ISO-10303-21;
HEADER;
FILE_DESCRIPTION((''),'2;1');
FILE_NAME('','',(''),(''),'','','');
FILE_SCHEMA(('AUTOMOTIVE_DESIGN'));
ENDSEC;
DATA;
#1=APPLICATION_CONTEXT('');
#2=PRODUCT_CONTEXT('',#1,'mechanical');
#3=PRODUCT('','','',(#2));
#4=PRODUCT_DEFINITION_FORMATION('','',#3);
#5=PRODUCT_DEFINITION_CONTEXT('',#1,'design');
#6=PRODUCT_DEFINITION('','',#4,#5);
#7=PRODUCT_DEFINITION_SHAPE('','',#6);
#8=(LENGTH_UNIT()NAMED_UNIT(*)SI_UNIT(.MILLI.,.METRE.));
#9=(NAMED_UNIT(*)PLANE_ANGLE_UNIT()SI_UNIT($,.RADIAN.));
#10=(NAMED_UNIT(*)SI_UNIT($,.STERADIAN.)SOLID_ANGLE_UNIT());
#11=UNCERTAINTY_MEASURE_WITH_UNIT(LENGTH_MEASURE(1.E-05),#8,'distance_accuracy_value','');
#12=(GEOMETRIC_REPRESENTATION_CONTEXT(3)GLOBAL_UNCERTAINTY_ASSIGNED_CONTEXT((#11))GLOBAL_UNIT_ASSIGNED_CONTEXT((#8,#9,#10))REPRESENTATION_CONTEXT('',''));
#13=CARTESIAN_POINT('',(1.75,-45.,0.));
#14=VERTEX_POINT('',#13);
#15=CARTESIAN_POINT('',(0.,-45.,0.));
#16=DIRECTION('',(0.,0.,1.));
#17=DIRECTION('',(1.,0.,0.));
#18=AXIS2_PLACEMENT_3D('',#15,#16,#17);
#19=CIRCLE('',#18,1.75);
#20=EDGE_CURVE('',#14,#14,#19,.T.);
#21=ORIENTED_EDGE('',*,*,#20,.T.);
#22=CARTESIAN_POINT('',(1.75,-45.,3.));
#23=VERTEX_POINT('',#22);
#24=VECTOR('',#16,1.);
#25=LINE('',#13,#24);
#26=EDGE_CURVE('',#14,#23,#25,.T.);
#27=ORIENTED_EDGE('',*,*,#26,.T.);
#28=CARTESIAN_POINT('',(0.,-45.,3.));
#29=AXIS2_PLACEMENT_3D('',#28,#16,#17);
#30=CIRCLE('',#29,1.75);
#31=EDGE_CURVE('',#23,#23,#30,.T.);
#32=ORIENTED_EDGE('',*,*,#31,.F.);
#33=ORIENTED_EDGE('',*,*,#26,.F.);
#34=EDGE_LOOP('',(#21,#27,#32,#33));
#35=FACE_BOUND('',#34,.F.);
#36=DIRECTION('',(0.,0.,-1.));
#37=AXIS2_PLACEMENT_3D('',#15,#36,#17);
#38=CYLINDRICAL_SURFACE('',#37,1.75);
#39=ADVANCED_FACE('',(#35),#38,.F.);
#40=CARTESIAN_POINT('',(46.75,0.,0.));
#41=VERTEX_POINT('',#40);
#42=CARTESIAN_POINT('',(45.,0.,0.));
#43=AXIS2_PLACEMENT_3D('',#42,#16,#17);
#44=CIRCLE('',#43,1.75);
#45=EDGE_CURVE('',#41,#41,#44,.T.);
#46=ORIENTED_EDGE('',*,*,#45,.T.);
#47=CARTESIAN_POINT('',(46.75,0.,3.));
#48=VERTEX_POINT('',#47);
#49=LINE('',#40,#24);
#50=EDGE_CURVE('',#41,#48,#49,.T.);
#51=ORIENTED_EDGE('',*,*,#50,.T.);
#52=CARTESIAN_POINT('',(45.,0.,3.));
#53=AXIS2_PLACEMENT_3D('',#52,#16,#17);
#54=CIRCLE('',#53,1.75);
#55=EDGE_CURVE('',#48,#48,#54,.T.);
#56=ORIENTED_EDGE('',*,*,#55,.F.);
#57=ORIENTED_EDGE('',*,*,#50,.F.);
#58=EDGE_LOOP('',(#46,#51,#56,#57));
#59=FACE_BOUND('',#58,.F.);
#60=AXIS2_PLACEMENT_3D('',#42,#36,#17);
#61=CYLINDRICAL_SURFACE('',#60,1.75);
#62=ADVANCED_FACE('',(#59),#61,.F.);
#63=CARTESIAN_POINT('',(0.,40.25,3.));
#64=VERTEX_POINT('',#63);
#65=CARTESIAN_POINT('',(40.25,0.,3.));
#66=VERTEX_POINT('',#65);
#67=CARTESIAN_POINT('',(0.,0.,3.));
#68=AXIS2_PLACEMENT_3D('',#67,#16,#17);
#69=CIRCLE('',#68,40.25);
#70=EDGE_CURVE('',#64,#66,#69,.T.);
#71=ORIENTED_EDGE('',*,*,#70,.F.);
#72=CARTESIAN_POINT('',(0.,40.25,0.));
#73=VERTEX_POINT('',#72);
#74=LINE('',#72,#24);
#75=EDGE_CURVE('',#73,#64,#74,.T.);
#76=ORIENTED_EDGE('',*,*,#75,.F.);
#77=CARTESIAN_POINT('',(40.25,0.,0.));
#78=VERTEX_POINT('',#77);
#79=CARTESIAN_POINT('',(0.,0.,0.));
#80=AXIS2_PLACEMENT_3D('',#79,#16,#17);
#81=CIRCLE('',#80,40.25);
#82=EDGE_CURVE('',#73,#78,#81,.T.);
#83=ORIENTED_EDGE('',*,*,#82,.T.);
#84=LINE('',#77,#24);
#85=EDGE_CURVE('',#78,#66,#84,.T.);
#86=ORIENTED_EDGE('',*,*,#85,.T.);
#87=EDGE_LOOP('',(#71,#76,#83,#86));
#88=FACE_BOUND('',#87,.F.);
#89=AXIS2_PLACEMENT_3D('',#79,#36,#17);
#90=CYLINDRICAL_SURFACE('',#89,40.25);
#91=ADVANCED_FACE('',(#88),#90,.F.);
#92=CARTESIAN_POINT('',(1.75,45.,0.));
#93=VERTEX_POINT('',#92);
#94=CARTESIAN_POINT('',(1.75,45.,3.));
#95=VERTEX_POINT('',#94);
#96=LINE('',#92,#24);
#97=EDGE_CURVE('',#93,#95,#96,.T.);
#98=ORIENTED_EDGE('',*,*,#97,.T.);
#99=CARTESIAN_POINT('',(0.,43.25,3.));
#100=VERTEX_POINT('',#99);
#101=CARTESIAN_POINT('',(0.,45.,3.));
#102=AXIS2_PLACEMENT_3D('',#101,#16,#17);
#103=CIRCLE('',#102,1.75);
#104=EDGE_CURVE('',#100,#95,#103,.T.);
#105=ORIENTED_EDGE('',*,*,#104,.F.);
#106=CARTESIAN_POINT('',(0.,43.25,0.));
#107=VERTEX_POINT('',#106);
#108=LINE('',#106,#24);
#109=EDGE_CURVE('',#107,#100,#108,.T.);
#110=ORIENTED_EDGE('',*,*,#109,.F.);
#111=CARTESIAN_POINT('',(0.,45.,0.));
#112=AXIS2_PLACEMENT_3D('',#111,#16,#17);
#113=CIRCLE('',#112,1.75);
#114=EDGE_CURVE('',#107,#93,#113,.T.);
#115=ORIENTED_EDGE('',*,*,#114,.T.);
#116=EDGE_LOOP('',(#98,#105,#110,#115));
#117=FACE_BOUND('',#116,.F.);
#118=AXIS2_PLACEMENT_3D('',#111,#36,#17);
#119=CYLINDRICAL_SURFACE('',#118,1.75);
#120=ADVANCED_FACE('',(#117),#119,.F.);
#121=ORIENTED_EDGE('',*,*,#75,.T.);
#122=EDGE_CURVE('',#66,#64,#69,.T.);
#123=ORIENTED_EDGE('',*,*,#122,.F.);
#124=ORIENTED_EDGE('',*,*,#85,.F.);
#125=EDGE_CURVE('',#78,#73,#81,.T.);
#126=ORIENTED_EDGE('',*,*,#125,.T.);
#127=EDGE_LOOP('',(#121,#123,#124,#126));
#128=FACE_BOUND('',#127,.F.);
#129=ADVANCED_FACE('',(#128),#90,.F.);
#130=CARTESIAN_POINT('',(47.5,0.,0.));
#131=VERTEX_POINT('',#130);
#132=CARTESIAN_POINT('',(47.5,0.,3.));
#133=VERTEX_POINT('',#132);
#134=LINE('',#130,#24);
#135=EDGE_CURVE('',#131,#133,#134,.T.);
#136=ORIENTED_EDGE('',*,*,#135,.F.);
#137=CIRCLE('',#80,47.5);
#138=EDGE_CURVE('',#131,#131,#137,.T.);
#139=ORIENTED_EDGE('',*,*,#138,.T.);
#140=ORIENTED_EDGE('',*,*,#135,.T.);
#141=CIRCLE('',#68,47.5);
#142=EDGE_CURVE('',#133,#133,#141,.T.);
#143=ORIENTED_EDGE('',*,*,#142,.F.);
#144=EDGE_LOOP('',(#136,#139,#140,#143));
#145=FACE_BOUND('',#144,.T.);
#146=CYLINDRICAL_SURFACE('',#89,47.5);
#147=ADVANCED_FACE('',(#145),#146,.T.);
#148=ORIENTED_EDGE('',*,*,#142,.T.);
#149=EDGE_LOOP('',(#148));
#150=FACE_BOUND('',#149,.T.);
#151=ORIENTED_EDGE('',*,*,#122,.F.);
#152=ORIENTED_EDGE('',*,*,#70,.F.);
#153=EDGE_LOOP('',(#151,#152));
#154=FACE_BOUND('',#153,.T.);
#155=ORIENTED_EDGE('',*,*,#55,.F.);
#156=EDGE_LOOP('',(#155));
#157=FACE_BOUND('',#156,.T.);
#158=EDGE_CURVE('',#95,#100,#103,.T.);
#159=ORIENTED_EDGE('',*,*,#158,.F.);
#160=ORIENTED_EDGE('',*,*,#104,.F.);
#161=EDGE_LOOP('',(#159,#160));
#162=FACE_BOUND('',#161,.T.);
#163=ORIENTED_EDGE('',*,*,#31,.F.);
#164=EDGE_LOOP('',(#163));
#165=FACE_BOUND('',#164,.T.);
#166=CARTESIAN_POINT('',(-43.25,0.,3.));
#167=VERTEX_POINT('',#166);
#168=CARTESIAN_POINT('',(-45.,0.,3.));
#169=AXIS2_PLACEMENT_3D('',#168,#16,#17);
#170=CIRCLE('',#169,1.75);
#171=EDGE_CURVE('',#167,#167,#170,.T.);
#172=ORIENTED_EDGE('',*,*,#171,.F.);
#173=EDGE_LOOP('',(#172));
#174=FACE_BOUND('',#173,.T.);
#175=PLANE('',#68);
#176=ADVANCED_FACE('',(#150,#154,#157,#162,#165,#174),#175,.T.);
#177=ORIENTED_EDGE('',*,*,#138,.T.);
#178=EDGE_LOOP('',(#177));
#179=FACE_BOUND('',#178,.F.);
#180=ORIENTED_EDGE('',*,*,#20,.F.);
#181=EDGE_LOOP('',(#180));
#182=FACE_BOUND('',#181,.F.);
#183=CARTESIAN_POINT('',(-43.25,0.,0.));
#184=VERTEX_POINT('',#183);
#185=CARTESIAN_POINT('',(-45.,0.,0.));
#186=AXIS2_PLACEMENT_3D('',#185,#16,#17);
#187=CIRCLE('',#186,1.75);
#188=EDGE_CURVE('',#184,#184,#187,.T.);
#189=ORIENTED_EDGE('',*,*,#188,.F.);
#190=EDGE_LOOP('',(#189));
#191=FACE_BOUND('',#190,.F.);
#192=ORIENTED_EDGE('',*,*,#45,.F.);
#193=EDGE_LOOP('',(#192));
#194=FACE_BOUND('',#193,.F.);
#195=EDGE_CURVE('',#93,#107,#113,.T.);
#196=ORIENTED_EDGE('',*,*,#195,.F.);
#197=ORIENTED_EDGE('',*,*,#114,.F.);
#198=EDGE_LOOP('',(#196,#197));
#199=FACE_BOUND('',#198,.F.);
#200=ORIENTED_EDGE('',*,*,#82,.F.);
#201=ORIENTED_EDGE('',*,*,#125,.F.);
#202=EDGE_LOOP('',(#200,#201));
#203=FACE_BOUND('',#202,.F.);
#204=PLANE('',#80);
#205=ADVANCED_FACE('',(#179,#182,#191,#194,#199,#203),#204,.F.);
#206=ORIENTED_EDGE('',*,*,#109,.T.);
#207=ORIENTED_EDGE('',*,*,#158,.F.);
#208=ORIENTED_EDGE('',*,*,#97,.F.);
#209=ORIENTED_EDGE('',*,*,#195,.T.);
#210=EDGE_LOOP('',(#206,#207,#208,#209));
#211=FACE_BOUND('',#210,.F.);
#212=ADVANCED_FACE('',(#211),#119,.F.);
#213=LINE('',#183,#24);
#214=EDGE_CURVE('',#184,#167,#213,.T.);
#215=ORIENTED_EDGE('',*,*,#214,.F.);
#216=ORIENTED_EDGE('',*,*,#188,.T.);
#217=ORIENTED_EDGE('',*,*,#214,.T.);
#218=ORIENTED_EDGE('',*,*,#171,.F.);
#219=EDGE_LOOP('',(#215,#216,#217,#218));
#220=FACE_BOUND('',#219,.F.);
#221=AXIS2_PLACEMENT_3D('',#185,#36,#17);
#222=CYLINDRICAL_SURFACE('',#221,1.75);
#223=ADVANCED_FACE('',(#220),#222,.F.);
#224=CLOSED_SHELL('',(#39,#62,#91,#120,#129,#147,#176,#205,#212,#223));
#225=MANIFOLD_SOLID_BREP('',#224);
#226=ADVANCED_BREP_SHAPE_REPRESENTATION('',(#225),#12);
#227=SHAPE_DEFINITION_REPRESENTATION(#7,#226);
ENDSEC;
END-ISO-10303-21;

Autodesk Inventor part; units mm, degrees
ref_plane "YZ Plane" through (0, 0, 0) normal (1, 0, 0) x (0, 1, 0)
ref_plane "XZ Plane" through (0, 0, 0) normal (0, 1, 0) x (-1, 0, 0)
ref_plane "XY Plane" through (0, 0, 0) normal (0, 0, 1) x (1, 0, 0)
sketch "Sketch1" plane through (0, 0, 0) normal (0, 0, 1) x (1, 0, 0)
  circle A0 centre (0, 0) radius 47.5
  circle A1 centre (0, 0) radius 40.25
  line L0 (0, 0) -> (0, 45)
  circle A2 centre (0, 45) radius 1.75
  circle A3 centre (-45, 0) radius 1.75
  circle A4 centre (0, -45) radius 1.75
  circle A5 centre (45, 0) radius 1.75
  dimension "d0" = 95
  dimension "d1" = 80.5
  dimension "d2" = 45
  dimension "d3" = 3.5
  dimension "d6" = 360
extrude "Extrusion1" add sketch "Sketch1" along normal blind 3
properties part number "arm_0_bottom_top_lock"
